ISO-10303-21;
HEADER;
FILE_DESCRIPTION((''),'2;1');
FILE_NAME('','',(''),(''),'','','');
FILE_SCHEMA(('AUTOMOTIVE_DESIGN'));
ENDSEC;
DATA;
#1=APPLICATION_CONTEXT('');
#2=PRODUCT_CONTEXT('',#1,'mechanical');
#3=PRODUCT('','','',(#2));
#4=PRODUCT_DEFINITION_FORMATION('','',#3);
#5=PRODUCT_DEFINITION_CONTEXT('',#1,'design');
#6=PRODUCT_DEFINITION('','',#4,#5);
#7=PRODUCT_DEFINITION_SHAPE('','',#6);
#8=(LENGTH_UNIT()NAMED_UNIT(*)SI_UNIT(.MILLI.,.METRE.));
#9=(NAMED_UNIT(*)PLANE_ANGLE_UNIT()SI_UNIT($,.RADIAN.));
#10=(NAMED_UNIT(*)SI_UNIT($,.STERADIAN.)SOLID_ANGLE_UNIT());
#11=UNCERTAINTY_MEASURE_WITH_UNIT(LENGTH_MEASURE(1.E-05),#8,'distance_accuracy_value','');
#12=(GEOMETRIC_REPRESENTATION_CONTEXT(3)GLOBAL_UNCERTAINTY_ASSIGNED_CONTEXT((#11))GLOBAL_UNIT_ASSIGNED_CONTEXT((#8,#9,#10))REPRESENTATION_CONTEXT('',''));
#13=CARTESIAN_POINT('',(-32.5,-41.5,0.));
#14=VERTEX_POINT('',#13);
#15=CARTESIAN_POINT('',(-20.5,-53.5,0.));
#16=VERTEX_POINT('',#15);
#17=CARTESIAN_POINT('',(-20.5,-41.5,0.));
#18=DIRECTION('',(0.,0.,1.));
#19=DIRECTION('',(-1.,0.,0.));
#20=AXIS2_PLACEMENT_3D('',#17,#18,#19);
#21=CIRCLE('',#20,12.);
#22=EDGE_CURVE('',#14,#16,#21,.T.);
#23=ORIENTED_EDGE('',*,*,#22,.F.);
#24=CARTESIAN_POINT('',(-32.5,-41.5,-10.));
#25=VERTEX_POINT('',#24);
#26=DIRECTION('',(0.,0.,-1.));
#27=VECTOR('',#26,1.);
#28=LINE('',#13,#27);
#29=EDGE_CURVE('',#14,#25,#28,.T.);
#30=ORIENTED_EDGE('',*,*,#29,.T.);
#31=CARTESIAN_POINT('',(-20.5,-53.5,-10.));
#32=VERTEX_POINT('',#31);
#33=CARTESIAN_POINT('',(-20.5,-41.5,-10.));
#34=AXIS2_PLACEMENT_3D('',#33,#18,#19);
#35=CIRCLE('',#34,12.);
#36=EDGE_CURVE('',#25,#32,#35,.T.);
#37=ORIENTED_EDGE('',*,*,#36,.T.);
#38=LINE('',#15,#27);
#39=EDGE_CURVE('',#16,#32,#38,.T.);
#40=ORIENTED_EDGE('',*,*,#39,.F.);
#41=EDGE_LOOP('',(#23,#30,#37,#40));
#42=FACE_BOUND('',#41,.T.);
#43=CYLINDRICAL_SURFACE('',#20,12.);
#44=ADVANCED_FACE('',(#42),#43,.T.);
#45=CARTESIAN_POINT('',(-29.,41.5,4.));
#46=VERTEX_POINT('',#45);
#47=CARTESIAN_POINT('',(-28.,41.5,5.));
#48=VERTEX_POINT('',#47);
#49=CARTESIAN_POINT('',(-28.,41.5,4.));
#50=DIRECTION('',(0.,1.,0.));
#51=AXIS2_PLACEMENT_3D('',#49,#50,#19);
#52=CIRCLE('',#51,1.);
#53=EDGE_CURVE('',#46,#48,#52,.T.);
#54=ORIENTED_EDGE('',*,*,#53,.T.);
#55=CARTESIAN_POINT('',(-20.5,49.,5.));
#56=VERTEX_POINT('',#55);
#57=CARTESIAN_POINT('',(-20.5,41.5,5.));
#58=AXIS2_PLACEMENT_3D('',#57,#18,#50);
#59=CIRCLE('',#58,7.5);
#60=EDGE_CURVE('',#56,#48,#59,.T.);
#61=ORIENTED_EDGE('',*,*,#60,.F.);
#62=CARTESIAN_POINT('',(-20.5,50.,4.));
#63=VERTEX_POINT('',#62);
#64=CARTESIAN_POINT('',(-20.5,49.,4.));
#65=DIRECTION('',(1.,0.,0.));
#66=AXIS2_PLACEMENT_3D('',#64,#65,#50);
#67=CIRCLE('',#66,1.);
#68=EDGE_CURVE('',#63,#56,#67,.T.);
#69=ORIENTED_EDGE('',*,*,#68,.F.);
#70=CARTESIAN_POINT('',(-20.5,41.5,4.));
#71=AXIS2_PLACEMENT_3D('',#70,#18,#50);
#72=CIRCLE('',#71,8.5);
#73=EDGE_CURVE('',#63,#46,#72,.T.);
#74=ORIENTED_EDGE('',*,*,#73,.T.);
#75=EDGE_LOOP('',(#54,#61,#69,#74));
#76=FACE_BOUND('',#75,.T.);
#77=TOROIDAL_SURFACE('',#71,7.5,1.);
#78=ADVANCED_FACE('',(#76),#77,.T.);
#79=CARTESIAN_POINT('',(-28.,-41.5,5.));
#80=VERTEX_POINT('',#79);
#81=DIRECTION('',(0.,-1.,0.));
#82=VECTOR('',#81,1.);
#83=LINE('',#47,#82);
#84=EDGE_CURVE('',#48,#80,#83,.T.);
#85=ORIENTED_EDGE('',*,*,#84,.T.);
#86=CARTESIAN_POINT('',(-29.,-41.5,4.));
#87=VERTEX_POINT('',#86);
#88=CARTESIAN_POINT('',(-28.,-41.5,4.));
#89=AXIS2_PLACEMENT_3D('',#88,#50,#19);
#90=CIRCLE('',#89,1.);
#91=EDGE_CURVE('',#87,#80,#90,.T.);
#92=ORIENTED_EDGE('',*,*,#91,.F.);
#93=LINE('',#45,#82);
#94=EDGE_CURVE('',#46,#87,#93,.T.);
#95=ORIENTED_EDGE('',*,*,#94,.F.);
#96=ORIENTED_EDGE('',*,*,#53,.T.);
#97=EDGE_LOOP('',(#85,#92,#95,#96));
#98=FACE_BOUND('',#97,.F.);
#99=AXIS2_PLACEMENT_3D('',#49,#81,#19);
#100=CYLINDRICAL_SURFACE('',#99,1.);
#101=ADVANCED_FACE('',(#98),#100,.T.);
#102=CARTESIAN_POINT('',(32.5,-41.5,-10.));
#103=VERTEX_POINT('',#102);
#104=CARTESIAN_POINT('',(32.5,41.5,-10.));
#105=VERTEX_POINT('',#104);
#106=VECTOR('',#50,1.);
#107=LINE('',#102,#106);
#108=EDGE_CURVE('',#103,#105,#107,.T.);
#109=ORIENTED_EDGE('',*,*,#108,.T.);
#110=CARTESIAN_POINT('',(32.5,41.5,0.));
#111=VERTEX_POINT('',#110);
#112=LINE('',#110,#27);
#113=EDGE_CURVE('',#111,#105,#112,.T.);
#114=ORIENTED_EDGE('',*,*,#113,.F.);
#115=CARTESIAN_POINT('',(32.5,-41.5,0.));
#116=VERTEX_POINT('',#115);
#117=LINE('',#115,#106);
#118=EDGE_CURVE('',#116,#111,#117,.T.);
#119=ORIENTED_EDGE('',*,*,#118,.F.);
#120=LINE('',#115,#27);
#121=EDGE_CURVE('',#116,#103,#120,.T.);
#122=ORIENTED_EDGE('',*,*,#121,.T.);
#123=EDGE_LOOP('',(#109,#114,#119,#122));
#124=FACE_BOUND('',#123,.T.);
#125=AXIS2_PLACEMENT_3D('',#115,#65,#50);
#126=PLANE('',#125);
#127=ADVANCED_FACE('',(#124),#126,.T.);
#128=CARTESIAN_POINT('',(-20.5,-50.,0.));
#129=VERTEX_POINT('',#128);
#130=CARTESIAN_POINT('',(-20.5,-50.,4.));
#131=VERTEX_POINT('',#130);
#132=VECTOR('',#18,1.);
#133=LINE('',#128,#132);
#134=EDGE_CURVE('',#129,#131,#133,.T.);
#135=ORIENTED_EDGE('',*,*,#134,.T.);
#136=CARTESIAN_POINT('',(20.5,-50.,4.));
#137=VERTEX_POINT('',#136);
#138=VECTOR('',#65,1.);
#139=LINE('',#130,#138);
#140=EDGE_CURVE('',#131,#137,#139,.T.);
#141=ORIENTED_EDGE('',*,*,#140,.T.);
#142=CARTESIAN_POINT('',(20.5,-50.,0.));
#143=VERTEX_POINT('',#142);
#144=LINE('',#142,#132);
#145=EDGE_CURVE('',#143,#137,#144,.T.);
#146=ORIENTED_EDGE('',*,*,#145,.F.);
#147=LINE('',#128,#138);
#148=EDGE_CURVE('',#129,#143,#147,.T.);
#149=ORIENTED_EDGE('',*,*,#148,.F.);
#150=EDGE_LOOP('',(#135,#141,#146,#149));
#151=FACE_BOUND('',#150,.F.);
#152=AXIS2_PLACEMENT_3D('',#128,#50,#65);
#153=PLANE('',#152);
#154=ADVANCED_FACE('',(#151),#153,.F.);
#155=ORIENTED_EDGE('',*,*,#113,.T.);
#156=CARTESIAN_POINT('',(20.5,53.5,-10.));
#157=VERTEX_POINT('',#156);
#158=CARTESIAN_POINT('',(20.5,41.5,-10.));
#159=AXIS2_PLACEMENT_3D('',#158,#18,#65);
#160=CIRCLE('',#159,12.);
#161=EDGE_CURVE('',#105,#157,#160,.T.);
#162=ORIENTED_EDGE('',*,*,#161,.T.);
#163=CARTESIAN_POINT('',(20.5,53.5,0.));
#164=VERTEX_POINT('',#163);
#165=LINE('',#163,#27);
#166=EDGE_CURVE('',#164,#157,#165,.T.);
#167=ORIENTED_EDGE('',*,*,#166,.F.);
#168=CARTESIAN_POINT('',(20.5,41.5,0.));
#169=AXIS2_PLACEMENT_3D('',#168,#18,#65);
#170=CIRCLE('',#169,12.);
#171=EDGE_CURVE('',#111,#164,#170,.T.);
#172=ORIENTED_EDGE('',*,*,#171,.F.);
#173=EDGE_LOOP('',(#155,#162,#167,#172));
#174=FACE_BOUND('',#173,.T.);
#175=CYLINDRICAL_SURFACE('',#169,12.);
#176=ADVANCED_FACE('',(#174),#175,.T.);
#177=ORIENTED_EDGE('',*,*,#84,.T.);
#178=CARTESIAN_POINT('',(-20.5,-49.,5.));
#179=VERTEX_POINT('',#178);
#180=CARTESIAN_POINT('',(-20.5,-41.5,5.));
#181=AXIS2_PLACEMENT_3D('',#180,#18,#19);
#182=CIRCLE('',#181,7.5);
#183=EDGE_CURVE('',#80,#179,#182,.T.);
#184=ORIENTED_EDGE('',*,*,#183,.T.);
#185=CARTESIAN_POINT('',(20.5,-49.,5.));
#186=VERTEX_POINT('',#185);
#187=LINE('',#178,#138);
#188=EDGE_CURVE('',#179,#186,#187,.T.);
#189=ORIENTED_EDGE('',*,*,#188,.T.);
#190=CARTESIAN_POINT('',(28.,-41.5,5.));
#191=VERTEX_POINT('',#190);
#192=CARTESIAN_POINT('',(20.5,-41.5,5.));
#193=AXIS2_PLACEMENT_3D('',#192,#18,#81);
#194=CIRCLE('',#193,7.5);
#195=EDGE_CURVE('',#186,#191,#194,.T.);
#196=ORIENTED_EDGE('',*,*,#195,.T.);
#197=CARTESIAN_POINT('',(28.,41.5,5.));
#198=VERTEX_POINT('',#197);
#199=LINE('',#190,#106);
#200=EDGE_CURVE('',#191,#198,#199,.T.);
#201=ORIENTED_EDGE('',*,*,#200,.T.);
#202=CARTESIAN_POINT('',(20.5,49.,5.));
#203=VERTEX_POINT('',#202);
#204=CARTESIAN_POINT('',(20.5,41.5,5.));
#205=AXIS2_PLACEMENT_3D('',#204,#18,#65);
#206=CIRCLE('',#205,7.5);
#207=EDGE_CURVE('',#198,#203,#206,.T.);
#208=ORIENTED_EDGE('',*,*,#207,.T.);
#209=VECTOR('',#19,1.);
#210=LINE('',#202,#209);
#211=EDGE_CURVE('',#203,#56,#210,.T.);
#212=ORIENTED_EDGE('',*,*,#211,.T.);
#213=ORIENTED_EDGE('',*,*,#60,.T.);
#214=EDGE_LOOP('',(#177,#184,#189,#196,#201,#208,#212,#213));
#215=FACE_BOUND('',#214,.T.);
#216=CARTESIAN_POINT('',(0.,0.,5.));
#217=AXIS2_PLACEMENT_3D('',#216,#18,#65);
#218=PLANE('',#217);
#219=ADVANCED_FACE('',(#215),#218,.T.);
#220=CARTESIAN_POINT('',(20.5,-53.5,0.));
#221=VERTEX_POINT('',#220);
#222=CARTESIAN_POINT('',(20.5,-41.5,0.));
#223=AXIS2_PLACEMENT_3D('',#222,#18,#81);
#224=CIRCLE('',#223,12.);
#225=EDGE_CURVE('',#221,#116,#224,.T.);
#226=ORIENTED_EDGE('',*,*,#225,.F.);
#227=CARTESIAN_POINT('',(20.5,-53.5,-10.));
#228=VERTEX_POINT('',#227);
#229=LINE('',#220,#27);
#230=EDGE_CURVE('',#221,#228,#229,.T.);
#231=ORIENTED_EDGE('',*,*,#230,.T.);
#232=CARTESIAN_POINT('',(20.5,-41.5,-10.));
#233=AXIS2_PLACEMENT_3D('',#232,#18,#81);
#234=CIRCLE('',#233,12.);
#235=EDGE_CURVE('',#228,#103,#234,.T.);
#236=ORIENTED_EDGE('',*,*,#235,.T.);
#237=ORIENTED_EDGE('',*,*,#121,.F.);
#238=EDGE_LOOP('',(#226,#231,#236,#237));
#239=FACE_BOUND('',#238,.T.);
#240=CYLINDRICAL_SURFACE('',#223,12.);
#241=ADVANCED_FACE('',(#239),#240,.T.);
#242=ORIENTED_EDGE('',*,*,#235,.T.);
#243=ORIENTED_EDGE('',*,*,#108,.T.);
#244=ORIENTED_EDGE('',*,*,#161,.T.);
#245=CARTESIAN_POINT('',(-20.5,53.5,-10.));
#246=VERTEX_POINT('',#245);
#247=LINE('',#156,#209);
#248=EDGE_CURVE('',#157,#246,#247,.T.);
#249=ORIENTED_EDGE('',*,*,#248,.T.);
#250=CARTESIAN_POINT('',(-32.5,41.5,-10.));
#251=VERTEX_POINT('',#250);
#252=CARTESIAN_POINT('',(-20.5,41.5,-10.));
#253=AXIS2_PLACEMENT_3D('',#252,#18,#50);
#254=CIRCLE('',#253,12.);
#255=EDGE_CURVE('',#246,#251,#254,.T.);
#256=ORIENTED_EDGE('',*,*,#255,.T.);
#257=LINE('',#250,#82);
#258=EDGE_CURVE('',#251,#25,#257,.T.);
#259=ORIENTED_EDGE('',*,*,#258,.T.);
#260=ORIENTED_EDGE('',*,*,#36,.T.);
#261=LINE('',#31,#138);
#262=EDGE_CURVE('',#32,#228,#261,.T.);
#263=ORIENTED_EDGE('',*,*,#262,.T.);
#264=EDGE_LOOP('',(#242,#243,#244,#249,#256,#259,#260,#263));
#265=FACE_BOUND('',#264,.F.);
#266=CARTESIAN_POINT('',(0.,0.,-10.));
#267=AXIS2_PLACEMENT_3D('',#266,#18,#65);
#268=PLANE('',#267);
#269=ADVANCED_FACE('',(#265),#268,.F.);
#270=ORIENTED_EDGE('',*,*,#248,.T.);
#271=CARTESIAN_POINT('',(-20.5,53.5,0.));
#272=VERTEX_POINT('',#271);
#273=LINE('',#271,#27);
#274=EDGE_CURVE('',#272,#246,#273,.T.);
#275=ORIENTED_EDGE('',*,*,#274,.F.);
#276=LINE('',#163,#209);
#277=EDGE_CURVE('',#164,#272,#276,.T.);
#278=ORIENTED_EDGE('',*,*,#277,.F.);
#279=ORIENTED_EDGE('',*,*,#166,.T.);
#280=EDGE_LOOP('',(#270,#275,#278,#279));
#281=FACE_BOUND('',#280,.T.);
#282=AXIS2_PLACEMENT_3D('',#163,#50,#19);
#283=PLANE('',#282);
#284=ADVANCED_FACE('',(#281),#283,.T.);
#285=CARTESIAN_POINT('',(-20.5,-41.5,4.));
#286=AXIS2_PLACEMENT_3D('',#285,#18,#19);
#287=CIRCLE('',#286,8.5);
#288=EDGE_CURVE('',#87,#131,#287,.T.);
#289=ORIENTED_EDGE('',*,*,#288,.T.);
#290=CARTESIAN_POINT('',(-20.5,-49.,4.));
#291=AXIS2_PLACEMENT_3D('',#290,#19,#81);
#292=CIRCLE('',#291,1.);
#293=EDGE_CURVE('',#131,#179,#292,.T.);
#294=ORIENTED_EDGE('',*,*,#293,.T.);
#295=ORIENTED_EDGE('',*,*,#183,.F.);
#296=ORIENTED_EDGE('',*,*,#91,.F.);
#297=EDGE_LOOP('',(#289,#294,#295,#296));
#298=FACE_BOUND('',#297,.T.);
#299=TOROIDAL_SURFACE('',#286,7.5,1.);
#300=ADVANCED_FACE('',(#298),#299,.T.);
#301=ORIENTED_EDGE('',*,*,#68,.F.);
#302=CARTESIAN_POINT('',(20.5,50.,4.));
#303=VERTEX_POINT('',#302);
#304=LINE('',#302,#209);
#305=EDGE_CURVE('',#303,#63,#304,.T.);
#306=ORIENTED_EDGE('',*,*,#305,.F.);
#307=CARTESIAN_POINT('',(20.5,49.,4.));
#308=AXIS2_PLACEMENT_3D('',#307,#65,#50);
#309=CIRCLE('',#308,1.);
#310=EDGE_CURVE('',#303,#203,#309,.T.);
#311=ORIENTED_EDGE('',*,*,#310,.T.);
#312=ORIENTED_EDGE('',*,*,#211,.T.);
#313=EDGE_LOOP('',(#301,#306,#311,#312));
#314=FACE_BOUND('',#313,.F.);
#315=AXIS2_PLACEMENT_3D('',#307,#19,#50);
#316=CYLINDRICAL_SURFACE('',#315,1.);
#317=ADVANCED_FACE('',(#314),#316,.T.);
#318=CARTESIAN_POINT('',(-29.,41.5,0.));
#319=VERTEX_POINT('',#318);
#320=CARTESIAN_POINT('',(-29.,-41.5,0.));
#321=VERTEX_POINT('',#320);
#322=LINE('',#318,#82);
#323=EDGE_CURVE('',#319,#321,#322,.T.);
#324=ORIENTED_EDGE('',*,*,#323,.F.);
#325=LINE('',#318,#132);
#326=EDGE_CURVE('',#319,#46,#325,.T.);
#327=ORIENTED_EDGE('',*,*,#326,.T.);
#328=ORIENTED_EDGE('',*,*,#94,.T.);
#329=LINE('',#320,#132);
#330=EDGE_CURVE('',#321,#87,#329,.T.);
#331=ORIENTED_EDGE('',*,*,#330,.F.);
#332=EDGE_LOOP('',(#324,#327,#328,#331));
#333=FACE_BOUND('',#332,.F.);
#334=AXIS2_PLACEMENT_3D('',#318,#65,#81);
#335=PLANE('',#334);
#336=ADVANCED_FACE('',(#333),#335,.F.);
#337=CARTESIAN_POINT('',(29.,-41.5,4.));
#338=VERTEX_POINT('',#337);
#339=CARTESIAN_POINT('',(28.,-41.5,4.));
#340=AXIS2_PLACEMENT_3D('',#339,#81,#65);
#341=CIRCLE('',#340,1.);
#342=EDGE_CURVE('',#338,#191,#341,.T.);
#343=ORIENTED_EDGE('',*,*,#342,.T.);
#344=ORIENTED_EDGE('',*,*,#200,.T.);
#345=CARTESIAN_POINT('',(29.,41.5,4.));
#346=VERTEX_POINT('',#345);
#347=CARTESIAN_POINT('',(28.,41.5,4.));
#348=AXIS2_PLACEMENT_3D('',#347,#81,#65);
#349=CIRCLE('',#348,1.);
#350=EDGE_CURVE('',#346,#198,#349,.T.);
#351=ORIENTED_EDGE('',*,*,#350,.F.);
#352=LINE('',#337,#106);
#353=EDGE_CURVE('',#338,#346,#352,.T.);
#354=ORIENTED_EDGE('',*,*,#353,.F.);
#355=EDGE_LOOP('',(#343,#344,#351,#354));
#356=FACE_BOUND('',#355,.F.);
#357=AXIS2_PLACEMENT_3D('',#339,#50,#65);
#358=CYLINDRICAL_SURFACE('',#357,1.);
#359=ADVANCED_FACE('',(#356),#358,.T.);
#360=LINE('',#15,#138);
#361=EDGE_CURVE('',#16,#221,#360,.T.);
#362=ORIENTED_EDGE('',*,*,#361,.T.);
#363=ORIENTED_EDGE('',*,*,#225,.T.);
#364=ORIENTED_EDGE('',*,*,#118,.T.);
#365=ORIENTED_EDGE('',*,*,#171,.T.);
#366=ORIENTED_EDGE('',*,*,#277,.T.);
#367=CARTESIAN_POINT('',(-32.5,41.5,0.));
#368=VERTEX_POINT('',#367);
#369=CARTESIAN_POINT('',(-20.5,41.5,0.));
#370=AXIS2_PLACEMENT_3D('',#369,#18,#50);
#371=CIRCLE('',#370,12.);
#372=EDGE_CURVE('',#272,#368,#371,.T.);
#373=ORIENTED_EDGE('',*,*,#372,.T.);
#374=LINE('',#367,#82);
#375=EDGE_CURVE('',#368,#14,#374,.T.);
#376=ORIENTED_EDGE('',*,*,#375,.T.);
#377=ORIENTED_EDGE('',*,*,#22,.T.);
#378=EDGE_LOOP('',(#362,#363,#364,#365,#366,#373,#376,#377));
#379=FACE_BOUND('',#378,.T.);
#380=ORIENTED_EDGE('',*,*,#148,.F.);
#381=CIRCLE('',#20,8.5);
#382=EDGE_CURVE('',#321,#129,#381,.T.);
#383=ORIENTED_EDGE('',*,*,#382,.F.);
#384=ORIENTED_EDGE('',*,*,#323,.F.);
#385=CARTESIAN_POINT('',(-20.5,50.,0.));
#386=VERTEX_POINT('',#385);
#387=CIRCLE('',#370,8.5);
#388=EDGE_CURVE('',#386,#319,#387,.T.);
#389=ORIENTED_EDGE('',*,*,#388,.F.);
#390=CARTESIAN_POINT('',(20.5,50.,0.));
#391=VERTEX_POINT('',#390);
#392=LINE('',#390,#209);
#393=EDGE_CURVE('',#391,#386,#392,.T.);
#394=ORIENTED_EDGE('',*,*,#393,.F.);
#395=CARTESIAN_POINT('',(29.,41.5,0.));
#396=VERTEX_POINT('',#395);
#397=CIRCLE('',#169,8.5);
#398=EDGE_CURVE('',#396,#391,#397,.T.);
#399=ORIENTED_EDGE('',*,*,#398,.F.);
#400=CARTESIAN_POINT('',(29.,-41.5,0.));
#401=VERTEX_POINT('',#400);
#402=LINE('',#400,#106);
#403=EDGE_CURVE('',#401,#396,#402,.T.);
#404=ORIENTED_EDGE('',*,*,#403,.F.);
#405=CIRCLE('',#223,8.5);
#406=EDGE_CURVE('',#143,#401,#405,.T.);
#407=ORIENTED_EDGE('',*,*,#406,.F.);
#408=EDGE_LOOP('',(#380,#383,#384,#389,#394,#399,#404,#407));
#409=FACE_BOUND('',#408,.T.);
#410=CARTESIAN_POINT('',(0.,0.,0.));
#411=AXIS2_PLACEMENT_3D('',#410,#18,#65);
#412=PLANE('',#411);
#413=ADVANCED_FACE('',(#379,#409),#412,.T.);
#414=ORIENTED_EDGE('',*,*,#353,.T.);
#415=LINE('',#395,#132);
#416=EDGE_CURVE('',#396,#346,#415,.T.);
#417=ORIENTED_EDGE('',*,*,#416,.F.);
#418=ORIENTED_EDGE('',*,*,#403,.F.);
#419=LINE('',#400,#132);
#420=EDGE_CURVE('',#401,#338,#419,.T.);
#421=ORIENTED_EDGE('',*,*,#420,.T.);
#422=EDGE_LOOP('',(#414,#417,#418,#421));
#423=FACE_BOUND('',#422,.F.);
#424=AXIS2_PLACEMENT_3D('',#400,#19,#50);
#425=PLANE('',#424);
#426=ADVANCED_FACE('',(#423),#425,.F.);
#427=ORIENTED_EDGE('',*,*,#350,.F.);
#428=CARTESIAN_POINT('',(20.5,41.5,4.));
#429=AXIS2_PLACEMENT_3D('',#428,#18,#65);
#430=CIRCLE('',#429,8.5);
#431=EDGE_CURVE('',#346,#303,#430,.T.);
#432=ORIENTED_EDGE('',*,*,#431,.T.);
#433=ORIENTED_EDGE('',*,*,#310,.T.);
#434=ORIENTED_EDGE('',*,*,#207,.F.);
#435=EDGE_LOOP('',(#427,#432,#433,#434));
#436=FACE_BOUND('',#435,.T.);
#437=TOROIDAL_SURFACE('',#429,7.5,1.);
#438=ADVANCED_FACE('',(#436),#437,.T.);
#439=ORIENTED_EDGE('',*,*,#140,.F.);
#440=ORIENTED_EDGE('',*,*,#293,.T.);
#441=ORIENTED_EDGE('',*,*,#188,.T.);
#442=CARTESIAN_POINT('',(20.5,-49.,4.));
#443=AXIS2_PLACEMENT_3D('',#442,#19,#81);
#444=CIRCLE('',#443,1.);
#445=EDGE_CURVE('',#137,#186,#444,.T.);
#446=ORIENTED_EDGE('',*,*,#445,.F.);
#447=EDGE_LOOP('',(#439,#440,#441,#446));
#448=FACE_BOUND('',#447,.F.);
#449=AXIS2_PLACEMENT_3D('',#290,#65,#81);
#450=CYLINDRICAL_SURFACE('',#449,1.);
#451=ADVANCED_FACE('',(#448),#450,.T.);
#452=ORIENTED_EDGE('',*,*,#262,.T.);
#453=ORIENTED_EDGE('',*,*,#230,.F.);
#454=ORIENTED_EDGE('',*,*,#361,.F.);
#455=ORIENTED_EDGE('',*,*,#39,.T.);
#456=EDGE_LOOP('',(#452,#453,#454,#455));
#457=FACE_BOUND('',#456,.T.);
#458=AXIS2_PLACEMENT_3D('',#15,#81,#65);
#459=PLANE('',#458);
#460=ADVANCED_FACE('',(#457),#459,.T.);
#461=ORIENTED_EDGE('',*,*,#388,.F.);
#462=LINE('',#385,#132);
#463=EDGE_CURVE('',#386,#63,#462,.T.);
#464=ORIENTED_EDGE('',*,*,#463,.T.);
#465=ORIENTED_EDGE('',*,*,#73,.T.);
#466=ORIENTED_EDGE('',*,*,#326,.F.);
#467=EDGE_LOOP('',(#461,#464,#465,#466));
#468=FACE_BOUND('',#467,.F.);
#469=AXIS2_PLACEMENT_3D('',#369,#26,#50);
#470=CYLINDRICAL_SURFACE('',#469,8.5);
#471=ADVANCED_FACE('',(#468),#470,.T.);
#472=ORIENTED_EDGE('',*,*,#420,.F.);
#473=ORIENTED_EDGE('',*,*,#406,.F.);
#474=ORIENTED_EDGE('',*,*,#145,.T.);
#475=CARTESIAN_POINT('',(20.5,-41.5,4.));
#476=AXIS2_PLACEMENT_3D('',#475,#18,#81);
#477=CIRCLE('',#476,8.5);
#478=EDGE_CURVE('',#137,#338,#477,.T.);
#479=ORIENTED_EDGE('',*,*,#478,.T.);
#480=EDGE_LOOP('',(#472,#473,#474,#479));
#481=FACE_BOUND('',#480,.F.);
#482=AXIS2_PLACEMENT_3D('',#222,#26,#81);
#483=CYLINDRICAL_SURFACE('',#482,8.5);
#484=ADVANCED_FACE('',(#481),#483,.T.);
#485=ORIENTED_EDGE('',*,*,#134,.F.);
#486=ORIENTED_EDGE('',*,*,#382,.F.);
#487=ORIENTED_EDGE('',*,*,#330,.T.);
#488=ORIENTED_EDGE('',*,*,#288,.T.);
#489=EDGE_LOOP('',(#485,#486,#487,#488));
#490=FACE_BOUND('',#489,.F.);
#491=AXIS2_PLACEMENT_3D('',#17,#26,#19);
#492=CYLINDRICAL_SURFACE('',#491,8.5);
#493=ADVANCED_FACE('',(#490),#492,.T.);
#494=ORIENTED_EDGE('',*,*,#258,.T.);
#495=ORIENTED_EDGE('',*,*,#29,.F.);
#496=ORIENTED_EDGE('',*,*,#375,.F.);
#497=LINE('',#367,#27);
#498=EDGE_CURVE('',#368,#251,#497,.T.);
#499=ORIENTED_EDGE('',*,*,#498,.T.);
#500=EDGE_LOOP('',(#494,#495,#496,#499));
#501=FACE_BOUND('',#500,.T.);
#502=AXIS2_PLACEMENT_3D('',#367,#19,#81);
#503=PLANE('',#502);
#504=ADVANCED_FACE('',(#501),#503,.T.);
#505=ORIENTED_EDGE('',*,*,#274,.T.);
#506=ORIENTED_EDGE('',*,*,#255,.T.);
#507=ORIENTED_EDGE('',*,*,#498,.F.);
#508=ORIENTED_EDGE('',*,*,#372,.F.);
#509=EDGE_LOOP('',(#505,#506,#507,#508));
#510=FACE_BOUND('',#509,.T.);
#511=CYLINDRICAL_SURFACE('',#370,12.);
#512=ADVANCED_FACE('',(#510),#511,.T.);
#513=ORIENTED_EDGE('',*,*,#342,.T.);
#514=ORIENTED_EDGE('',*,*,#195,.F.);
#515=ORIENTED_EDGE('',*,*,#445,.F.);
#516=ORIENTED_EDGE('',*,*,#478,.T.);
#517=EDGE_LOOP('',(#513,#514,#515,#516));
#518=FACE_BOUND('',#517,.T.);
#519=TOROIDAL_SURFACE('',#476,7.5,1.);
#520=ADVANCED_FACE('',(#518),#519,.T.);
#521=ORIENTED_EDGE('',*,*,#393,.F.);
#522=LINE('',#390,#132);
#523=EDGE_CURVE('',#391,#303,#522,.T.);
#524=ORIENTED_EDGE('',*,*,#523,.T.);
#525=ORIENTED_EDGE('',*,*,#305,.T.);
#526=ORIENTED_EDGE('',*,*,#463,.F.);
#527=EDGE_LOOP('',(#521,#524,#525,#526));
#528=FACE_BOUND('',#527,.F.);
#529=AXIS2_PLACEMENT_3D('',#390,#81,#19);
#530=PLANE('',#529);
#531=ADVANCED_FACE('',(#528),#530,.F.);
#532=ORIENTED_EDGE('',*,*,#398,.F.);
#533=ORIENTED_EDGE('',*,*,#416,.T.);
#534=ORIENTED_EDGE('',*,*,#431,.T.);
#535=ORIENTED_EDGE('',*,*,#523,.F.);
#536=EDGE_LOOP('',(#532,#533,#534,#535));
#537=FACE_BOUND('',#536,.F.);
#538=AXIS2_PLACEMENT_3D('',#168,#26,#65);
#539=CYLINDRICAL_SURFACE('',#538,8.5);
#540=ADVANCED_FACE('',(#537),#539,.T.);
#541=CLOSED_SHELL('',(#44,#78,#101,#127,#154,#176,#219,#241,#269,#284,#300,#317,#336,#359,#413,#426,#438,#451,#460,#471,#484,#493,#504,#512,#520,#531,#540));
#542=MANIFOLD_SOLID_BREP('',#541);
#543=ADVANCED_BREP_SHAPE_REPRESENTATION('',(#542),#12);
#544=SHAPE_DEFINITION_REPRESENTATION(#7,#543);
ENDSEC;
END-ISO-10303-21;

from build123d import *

# Parameters (mm, degrees)
F1_DEPTH = 5
F3_DEPTH = 10
F4_R     = 1


# Not quite as in the source:
# - a feature names something its author has since deleted; it is built from what else it names


with BuildPart() as f1:
    # F0 (on Top) → F1 (new body)
    with BuildSketch(Plane.XY):
        with BuildLine():
            Line((29, -41.5), (29, 41.5))
            ThreePointArc((29, 41.5), (26.5104076401, 47.5104076401), (20.5, 50))
            Line((20.5, 50), (-20.5, 50))
            ThreePointArc((-20.5, 50), (-26.5104076401, 47.5104076401), (-29, 41.5))
            Line((-29, 41.5), (-29, -41.5))
            ThreePointArc((-29, -41.5), (-26.5104076401, -47.5104076401), (-20.5, -50))
            Line((-20.5, -50), (20.5, -50))
            ThreePointArc((20.5, -50), (26.5104076401, -47.5104076401), (29, -41.5))
        make_face()
    extrude(amount=F1_DEPTH)

    # F2 (on Top) → F3 (join)
    with BuildSketch(Plane.XY):
        with BuildLine():
            ThreePointArc((32.5, 41.5), (28.9852813742, 49.9852813742), (20.5, 53.5))
            Line((20.5, 53.5), (-20.5, 53.5))
            ThreePointArc((-20.5, 53.5), (-28.9852813742, 49.9852813742), (-32.5, 41.5))
            Line((-32.5, 41.5), (-32.5, -41.5))
            ThreePointArc((-32.5, -41.5), (-28.9852813742, -49.9852813742), (-20.5, -53.5))
            Line((-20.5, -53.5), (20.5, -53.5))
            ThreePointArc((20.5, -53.5), (28.9852813742, -49.9852813742), (32.5, -41.5))
            Line((32.5, -41.5), (32.5, 41.5))
        make_face()
    extrude(amount=-F3_DEPTH)

    # F4
    f4_edges = [f1.edges().sort_by_distance(p)[0] for p in [
        (0, 50, 5),
        (-26.510408, 47.510408, 5),
        (-29, 0, 5),
        (-26.510408, -47.510408, 5),
        (0, -50, 5),
        (26.510408, -47.510408, 5),
        (29, 0, 5),
        (26.510408, 47.510408, 5),
    ]]
    fillet(f4_edges, radius=F4_R)


solid = f1.part
